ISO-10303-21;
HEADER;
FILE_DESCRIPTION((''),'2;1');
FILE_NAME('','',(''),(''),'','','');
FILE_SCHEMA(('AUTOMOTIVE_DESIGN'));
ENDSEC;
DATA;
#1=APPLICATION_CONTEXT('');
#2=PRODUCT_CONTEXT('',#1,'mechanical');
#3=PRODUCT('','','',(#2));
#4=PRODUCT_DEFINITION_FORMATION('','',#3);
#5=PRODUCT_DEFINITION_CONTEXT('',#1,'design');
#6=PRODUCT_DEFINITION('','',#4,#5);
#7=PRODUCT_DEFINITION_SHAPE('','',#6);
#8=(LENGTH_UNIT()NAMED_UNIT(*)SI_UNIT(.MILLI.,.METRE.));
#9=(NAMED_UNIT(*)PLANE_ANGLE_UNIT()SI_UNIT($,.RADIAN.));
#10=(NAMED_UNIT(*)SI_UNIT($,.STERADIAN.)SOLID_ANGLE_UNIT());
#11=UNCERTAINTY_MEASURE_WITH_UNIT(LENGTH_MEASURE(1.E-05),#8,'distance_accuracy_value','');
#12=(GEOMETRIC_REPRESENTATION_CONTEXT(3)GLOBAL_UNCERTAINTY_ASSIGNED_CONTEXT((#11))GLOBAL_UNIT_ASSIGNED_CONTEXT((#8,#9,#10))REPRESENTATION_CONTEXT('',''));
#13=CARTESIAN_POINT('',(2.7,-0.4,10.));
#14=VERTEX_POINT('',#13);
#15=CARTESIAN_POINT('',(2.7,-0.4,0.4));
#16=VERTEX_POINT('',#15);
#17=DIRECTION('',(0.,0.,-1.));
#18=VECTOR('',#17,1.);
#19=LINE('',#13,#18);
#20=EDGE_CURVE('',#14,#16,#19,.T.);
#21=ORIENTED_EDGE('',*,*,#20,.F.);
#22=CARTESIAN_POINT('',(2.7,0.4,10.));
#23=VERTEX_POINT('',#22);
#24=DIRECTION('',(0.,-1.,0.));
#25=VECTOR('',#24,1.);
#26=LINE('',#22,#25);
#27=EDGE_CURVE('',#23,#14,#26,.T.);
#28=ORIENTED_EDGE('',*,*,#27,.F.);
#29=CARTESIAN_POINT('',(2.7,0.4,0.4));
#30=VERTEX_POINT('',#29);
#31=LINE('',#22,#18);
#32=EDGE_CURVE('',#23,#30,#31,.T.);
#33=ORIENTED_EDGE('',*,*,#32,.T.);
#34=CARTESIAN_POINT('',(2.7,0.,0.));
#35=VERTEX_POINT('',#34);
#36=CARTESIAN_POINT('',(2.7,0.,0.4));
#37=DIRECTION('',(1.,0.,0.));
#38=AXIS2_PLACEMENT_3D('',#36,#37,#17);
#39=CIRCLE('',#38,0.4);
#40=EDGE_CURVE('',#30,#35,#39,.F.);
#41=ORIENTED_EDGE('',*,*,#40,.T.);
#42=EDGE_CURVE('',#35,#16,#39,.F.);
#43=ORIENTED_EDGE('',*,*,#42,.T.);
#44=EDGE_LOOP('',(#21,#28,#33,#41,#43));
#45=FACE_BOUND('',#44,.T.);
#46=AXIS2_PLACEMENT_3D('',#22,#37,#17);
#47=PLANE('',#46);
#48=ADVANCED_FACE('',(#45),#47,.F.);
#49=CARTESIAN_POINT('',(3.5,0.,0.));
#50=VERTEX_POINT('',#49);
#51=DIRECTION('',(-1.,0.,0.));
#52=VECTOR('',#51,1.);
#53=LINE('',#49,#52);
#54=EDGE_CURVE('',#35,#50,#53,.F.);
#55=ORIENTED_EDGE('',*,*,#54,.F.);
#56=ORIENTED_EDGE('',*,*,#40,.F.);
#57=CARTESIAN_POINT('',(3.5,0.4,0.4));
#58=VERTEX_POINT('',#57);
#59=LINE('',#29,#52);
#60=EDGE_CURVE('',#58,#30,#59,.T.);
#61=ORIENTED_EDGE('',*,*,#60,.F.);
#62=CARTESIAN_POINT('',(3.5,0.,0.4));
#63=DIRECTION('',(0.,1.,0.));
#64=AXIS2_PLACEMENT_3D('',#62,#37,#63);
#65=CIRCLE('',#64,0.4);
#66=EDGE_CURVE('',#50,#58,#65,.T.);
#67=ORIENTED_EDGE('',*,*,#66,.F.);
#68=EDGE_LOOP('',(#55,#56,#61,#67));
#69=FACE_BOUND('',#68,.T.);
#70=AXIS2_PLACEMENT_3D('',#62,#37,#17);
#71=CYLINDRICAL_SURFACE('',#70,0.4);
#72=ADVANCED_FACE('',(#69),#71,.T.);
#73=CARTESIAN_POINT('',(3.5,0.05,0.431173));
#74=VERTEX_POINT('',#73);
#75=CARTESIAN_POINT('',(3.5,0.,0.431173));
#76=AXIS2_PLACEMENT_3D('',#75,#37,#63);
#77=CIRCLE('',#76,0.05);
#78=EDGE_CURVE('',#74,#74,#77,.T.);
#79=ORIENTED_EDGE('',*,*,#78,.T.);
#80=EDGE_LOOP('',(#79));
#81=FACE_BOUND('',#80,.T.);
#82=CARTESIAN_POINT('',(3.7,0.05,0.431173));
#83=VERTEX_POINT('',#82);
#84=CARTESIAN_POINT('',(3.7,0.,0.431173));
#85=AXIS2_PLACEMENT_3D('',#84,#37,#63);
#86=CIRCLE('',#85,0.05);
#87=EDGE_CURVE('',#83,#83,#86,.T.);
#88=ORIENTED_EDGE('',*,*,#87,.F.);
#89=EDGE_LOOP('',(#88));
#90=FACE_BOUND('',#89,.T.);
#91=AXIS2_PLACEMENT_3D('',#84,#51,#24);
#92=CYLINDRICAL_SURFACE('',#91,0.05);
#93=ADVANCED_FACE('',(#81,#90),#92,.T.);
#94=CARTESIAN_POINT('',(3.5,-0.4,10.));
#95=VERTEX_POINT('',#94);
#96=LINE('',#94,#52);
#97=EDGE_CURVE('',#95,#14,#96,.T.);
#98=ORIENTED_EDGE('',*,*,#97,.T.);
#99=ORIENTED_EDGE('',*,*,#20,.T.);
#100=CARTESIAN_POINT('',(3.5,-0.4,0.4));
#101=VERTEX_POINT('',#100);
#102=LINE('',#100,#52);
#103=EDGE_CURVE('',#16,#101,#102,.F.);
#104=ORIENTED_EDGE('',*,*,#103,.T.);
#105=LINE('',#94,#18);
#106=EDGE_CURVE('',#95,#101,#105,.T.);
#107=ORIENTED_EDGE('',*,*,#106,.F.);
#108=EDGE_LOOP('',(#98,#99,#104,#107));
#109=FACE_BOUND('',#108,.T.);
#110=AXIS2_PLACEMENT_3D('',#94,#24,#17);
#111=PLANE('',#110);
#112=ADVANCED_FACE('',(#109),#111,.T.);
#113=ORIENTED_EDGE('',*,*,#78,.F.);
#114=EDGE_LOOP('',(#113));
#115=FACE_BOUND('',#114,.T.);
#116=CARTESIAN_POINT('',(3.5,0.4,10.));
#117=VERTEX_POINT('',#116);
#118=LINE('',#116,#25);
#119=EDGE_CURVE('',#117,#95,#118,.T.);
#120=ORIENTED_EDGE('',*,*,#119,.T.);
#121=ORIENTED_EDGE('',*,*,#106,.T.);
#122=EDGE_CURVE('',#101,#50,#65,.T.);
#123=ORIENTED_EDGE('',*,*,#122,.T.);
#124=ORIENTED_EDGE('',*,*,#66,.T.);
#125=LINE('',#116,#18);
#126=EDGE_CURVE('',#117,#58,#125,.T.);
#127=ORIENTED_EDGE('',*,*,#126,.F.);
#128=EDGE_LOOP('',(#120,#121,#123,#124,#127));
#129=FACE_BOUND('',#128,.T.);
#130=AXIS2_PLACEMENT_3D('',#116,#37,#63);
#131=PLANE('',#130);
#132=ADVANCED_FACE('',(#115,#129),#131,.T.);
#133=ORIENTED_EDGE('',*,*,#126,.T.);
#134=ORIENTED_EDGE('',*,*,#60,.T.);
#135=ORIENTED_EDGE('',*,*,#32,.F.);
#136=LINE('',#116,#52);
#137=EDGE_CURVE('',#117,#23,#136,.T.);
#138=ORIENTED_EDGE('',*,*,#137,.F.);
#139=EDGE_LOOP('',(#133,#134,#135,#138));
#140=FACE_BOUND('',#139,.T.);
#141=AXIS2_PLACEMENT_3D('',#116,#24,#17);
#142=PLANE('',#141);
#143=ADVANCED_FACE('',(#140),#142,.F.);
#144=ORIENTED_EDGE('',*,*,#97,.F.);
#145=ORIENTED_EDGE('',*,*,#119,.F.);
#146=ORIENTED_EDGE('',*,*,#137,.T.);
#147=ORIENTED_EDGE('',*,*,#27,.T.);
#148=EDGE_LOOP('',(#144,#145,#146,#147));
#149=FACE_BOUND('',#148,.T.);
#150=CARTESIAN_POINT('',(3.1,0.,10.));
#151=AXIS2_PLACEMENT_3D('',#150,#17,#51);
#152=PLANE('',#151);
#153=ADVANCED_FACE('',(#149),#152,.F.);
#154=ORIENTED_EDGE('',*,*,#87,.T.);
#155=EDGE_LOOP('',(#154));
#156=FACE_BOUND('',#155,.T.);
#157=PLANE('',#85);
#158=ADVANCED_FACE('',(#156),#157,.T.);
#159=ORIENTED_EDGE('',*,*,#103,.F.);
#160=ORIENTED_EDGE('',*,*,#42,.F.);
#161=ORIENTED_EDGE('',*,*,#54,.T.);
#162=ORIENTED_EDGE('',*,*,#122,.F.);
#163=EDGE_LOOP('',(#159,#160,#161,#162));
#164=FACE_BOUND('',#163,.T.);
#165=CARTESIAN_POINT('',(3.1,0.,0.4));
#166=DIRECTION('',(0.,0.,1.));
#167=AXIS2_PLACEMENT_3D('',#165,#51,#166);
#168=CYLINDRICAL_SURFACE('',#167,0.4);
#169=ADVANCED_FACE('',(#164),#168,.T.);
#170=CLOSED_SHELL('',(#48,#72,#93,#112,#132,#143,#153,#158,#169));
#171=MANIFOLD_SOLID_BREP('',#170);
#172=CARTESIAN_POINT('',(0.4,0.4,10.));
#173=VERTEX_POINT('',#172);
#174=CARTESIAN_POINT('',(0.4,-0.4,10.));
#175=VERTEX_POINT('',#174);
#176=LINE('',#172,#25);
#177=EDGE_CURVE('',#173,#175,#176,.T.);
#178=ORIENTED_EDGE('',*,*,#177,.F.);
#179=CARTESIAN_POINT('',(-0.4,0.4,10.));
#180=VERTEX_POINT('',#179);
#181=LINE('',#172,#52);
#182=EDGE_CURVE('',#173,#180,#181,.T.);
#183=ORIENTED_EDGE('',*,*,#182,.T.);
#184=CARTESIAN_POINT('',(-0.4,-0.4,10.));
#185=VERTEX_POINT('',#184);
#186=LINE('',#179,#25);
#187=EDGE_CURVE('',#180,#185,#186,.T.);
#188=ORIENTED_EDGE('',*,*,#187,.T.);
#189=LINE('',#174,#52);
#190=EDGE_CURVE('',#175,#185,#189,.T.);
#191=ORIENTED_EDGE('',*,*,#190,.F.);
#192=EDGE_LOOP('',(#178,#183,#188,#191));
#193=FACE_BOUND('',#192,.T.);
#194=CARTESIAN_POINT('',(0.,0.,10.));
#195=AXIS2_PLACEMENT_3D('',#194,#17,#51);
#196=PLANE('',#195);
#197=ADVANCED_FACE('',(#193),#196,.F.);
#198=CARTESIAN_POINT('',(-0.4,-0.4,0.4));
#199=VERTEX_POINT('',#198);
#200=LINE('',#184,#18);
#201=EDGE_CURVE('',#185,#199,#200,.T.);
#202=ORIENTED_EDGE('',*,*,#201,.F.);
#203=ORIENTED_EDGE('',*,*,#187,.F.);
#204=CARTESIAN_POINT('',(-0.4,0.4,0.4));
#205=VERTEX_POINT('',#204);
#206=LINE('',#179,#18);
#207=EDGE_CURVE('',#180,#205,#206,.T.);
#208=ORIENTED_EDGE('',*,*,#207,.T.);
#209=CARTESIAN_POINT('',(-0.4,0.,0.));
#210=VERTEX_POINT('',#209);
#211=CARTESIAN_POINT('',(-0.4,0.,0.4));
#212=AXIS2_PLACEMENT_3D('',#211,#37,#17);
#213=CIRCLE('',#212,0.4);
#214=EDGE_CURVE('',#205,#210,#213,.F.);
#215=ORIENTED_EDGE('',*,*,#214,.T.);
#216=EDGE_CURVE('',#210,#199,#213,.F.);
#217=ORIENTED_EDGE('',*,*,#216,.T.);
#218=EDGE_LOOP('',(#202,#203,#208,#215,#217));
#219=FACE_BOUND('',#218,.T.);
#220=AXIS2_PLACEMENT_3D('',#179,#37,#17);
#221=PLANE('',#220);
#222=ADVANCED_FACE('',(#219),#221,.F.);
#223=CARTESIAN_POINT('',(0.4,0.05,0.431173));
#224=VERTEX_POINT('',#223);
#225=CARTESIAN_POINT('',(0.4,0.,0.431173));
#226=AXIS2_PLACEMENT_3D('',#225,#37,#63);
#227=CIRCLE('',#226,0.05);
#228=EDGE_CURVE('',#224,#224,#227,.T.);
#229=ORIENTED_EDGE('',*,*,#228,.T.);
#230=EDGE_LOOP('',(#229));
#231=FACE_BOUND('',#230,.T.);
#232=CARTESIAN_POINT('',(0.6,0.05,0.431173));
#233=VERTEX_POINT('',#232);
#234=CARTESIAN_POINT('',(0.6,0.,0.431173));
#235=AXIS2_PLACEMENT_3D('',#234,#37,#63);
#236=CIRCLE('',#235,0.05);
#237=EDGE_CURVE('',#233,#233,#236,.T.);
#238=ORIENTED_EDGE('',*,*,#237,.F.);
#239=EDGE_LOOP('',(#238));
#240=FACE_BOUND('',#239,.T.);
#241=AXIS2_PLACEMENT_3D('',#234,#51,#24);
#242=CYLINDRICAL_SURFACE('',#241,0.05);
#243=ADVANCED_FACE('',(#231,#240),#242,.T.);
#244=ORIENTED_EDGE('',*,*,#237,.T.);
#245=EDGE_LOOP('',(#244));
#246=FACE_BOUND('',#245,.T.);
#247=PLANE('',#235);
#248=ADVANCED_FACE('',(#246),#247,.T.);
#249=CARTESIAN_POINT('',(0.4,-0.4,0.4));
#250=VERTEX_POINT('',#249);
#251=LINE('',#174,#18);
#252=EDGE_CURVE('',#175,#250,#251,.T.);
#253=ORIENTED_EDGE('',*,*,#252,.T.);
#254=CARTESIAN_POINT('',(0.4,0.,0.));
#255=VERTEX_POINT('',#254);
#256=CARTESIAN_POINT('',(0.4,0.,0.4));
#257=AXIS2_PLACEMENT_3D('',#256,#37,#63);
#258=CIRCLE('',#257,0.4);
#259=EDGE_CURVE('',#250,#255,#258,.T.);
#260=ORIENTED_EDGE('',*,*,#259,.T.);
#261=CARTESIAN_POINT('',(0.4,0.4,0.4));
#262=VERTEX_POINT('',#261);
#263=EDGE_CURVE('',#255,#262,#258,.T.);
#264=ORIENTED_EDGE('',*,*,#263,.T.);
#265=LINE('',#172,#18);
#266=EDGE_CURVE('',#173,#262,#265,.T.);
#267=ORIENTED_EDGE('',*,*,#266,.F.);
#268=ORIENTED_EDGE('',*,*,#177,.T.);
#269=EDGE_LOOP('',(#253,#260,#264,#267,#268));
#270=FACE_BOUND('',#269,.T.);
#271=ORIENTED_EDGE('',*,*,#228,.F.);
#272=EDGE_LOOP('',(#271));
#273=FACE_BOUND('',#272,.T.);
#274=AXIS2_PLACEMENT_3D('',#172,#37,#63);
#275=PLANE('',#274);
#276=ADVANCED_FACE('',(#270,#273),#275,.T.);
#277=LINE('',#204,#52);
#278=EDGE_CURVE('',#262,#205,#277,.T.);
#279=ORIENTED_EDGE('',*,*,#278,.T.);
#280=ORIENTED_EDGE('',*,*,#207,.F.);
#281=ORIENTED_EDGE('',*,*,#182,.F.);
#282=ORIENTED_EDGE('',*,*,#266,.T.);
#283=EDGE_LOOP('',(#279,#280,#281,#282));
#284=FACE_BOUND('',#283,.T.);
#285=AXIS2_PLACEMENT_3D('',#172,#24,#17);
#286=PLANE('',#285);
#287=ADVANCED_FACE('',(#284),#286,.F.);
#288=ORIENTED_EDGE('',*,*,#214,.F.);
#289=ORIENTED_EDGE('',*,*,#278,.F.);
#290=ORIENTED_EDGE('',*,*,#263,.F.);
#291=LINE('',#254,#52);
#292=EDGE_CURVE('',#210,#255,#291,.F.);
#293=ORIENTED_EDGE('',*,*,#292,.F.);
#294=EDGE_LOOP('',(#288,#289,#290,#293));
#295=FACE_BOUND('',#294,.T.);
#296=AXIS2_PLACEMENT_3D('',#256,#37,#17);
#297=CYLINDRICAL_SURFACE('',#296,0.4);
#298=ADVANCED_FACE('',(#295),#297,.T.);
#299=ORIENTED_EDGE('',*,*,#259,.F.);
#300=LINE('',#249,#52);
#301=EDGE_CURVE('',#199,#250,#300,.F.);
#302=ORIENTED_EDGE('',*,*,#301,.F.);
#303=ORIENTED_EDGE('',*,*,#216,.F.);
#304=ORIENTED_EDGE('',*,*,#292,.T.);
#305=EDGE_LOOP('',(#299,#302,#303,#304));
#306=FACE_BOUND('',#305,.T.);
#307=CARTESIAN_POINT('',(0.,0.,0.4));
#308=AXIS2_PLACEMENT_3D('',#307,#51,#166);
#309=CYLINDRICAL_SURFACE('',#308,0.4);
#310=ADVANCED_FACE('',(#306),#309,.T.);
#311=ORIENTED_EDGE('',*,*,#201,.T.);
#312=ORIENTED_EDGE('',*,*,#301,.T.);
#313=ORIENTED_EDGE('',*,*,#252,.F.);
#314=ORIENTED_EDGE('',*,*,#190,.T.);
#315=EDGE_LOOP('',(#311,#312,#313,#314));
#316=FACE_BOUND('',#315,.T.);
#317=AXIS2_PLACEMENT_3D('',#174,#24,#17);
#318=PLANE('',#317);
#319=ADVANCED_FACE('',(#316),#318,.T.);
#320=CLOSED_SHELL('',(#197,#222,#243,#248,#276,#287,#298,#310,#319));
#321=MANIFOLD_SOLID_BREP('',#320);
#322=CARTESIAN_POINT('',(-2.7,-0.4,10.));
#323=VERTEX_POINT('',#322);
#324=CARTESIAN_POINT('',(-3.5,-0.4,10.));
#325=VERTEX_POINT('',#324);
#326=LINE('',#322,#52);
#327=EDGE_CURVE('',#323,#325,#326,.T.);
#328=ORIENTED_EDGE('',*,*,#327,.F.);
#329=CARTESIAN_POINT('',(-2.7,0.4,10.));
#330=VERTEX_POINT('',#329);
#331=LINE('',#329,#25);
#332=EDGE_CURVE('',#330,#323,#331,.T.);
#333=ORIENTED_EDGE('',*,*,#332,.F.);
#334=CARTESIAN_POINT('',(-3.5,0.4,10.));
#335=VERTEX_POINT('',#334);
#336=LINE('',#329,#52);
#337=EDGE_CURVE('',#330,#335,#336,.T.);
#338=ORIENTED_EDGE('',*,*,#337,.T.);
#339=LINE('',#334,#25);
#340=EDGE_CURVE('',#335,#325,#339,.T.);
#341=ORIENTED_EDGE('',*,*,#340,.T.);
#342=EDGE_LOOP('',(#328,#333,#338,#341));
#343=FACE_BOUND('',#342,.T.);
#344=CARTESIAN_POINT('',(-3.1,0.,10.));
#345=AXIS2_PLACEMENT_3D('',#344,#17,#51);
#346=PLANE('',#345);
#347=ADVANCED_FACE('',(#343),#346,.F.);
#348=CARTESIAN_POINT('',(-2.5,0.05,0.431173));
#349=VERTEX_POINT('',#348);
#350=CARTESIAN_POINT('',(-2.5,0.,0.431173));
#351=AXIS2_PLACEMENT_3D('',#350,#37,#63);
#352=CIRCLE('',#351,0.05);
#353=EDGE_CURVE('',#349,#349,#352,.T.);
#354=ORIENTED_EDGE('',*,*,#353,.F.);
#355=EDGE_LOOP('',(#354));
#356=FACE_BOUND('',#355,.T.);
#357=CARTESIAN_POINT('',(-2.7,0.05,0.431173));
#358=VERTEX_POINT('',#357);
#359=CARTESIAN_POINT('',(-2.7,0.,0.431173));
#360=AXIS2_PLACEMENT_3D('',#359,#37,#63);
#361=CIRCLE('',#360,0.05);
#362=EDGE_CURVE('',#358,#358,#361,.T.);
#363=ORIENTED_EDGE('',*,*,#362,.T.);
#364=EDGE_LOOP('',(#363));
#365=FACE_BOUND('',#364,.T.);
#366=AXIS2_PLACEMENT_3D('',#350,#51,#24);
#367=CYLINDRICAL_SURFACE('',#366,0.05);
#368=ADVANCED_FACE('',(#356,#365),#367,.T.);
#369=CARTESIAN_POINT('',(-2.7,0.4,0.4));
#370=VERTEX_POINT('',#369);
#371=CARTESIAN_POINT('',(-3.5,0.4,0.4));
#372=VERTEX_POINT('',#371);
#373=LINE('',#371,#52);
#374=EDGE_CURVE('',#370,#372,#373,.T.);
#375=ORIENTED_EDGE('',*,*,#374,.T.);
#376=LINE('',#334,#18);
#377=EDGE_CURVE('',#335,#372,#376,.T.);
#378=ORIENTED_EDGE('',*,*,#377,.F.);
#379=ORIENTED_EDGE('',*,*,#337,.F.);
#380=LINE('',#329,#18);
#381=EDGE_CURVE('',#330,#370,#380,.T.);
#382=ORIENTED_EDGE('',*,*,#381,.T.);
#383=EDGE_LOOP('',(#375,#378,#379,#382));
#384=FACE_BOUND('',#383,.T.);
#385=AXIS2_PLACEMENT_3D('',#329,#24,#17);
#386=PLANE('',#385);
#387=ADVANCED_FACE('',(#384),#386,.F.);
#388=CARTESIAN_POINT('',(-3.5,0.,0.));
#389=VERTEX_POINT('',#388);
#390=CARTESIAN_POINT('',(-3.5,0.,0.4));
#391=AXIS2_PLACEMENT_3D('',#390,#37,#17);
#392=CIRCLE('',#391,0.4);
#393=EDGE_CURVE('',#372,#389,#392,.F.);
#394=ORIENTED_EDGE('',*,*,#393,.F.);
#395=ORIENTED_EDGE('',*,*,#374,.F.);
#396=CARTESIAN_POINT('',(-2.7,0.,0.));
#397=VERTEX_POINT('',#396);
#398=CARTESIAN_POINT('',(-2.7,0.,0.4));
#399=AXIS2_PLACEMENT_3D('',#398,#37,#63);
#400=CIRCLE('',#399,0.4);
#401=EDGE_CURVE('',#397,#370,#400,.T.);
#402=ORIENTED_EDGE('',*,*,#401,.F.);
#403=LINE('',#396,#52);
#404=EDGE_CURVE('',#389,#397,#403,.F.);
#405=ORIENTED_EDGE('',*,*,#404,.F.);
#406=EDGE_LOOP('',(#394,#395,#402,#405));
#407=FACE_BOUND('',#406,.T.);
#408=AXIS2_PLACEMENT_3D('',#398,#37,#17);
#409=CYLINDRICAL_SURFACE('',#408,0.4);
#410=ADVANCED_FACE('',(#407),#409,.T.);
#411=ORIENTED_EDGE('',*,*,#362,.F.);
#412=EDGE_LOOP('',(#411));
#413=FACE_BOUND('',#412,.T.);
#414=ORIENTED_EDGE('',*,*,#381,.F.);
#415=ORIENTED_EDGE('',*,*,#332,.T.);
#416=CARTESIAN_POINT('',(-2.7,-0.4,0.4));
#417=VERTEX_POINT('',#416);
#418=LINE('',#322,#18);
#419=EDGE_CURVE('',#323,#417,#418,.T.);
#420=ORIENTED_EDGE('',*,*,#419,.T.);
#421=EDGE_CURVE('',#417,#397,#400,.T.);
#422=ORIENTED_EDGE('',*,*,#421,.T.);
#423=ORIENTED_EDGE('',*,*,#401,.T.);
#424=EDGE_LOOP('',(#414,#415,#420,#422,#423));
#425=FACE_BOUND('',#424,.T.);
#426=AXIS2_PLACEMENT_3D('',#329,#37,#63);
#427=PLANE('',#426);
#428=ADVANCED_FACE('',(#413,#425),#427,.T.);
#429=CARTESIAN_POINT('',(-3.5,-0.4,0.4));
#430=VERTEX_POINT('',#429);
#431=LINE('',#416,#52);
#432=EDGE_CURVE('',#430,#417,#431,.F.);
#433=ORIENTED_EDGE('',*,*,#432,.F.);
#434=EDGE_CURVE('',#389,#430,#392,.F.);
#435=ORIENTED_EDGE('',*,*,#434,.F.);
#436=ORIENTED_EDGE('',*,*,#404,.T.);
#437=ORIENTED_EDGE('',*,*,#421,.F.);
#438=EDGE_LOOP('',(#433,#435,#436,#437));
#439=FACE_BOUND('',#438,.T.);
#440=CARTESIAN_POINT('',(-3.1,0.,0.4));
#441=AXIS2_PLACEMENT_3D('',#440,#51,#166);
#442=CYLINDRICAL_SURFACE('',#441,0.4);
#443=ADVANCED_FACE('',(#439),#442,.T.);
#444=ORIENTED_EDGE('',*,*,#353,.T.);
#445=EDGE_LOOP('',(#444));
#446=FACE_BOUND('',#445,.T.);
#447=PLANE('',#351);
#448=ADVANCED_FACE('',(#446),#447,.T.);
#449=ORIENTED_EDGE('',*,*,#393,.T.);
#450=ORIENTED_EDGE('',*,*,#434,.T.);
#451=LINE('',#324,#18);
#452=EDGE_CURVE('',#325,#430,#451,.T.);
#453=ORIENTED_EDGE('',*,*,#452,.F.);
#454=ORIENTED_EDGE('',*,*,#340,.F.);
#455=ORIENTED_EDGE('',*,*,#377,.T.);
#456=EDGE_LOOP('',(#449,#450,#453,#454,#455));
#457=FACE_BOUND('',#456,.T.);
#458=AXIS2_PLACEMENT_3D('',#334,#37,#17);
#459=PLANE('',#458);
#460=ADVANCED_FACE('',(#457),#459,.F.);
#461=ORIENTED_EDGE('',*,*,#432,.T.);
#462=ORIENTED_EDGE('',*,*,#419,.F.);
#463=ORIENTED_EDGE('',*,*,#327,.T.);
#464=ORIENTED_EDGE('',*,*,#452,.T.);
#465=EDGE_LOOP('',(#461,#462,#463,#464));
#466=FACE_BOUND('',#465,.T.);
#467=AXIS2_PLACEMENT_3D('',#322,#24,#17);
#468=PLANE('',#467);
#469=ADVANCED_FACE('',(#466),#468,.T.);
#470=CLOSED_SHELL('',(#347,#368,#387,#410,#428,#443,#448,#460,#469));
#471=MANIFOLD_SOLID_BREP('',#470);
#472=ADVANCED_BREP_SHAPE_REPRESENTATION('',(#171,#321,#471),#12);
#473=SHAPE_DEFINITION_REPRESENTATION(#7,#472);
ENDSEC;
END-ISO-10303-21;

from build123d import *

# Parameters (mm, degrees)
SKETCH2_W           = 0.8
SKETCH2_H           = 0.8
BOSS_EXTRUDE1_DEPTH = 10
SKETCH3_R           = 0.05
BOSS_EXTRUDE2_DEPTH = 0.2
FILLET1_R           = 0.4
LPATTERN1_COUNT     = 2
LPATTERN1_PITCH     = 3.1
LPATTERN1_2_COUNT   = 2
LPATTERN1_2_PITCH   = 3.1


with BuildPart() as part:
    # Sketch2 → Boss-Extrude1 (new body)
    with BuildSketch(Plane.XY):
        Rectangle(SKETCH2_W, SKETCH2_H)
    extrude(amount=BOSS_EXTRUDE1_DEPTH)

    # Sketch3 → Boss-Extrude2 (add)
    with BuildSketch(Plane(origin=(0.4, 0, 0), x_dir=(0, 0, -1), z_dir=(1, 0, 0))):
        with Locations(Location((-0.431172897, 0, 0), (0, 0, 90))):
            Circle(SKETCH3_R)
    extrude(amount=BOSS_EXTRUDE2_DEPTH)

    # Fillet1
    fillet1_edges = [part.edges().sort_by_distance(p)[0] for p in [
        (0, -0.4, 0),
        (0, 0.4, 0),
    ]]
    fillet(fillet1_edges, radius=FILLET1_R - 0.0001)  # a hair under: the kernel refuses the full size


with BuildPart() as lpattern1_1:
    # LPattern1: pattern copy
    add(part.part.moved(Location(Vector(1, 0, 0) * (1 * LPATTERN1_PITCH))))


with BuildPart() as lpattern1_2_1:
    # LPattern1 2: pattern copy
    add(part.part.moved(Location(Vector(-1, 0, 0) * (1 * LPATTERN1_2_PITCH))))


solid = Compound([part.part, lpattern1_1.part, lpattern1_2_1.part])
